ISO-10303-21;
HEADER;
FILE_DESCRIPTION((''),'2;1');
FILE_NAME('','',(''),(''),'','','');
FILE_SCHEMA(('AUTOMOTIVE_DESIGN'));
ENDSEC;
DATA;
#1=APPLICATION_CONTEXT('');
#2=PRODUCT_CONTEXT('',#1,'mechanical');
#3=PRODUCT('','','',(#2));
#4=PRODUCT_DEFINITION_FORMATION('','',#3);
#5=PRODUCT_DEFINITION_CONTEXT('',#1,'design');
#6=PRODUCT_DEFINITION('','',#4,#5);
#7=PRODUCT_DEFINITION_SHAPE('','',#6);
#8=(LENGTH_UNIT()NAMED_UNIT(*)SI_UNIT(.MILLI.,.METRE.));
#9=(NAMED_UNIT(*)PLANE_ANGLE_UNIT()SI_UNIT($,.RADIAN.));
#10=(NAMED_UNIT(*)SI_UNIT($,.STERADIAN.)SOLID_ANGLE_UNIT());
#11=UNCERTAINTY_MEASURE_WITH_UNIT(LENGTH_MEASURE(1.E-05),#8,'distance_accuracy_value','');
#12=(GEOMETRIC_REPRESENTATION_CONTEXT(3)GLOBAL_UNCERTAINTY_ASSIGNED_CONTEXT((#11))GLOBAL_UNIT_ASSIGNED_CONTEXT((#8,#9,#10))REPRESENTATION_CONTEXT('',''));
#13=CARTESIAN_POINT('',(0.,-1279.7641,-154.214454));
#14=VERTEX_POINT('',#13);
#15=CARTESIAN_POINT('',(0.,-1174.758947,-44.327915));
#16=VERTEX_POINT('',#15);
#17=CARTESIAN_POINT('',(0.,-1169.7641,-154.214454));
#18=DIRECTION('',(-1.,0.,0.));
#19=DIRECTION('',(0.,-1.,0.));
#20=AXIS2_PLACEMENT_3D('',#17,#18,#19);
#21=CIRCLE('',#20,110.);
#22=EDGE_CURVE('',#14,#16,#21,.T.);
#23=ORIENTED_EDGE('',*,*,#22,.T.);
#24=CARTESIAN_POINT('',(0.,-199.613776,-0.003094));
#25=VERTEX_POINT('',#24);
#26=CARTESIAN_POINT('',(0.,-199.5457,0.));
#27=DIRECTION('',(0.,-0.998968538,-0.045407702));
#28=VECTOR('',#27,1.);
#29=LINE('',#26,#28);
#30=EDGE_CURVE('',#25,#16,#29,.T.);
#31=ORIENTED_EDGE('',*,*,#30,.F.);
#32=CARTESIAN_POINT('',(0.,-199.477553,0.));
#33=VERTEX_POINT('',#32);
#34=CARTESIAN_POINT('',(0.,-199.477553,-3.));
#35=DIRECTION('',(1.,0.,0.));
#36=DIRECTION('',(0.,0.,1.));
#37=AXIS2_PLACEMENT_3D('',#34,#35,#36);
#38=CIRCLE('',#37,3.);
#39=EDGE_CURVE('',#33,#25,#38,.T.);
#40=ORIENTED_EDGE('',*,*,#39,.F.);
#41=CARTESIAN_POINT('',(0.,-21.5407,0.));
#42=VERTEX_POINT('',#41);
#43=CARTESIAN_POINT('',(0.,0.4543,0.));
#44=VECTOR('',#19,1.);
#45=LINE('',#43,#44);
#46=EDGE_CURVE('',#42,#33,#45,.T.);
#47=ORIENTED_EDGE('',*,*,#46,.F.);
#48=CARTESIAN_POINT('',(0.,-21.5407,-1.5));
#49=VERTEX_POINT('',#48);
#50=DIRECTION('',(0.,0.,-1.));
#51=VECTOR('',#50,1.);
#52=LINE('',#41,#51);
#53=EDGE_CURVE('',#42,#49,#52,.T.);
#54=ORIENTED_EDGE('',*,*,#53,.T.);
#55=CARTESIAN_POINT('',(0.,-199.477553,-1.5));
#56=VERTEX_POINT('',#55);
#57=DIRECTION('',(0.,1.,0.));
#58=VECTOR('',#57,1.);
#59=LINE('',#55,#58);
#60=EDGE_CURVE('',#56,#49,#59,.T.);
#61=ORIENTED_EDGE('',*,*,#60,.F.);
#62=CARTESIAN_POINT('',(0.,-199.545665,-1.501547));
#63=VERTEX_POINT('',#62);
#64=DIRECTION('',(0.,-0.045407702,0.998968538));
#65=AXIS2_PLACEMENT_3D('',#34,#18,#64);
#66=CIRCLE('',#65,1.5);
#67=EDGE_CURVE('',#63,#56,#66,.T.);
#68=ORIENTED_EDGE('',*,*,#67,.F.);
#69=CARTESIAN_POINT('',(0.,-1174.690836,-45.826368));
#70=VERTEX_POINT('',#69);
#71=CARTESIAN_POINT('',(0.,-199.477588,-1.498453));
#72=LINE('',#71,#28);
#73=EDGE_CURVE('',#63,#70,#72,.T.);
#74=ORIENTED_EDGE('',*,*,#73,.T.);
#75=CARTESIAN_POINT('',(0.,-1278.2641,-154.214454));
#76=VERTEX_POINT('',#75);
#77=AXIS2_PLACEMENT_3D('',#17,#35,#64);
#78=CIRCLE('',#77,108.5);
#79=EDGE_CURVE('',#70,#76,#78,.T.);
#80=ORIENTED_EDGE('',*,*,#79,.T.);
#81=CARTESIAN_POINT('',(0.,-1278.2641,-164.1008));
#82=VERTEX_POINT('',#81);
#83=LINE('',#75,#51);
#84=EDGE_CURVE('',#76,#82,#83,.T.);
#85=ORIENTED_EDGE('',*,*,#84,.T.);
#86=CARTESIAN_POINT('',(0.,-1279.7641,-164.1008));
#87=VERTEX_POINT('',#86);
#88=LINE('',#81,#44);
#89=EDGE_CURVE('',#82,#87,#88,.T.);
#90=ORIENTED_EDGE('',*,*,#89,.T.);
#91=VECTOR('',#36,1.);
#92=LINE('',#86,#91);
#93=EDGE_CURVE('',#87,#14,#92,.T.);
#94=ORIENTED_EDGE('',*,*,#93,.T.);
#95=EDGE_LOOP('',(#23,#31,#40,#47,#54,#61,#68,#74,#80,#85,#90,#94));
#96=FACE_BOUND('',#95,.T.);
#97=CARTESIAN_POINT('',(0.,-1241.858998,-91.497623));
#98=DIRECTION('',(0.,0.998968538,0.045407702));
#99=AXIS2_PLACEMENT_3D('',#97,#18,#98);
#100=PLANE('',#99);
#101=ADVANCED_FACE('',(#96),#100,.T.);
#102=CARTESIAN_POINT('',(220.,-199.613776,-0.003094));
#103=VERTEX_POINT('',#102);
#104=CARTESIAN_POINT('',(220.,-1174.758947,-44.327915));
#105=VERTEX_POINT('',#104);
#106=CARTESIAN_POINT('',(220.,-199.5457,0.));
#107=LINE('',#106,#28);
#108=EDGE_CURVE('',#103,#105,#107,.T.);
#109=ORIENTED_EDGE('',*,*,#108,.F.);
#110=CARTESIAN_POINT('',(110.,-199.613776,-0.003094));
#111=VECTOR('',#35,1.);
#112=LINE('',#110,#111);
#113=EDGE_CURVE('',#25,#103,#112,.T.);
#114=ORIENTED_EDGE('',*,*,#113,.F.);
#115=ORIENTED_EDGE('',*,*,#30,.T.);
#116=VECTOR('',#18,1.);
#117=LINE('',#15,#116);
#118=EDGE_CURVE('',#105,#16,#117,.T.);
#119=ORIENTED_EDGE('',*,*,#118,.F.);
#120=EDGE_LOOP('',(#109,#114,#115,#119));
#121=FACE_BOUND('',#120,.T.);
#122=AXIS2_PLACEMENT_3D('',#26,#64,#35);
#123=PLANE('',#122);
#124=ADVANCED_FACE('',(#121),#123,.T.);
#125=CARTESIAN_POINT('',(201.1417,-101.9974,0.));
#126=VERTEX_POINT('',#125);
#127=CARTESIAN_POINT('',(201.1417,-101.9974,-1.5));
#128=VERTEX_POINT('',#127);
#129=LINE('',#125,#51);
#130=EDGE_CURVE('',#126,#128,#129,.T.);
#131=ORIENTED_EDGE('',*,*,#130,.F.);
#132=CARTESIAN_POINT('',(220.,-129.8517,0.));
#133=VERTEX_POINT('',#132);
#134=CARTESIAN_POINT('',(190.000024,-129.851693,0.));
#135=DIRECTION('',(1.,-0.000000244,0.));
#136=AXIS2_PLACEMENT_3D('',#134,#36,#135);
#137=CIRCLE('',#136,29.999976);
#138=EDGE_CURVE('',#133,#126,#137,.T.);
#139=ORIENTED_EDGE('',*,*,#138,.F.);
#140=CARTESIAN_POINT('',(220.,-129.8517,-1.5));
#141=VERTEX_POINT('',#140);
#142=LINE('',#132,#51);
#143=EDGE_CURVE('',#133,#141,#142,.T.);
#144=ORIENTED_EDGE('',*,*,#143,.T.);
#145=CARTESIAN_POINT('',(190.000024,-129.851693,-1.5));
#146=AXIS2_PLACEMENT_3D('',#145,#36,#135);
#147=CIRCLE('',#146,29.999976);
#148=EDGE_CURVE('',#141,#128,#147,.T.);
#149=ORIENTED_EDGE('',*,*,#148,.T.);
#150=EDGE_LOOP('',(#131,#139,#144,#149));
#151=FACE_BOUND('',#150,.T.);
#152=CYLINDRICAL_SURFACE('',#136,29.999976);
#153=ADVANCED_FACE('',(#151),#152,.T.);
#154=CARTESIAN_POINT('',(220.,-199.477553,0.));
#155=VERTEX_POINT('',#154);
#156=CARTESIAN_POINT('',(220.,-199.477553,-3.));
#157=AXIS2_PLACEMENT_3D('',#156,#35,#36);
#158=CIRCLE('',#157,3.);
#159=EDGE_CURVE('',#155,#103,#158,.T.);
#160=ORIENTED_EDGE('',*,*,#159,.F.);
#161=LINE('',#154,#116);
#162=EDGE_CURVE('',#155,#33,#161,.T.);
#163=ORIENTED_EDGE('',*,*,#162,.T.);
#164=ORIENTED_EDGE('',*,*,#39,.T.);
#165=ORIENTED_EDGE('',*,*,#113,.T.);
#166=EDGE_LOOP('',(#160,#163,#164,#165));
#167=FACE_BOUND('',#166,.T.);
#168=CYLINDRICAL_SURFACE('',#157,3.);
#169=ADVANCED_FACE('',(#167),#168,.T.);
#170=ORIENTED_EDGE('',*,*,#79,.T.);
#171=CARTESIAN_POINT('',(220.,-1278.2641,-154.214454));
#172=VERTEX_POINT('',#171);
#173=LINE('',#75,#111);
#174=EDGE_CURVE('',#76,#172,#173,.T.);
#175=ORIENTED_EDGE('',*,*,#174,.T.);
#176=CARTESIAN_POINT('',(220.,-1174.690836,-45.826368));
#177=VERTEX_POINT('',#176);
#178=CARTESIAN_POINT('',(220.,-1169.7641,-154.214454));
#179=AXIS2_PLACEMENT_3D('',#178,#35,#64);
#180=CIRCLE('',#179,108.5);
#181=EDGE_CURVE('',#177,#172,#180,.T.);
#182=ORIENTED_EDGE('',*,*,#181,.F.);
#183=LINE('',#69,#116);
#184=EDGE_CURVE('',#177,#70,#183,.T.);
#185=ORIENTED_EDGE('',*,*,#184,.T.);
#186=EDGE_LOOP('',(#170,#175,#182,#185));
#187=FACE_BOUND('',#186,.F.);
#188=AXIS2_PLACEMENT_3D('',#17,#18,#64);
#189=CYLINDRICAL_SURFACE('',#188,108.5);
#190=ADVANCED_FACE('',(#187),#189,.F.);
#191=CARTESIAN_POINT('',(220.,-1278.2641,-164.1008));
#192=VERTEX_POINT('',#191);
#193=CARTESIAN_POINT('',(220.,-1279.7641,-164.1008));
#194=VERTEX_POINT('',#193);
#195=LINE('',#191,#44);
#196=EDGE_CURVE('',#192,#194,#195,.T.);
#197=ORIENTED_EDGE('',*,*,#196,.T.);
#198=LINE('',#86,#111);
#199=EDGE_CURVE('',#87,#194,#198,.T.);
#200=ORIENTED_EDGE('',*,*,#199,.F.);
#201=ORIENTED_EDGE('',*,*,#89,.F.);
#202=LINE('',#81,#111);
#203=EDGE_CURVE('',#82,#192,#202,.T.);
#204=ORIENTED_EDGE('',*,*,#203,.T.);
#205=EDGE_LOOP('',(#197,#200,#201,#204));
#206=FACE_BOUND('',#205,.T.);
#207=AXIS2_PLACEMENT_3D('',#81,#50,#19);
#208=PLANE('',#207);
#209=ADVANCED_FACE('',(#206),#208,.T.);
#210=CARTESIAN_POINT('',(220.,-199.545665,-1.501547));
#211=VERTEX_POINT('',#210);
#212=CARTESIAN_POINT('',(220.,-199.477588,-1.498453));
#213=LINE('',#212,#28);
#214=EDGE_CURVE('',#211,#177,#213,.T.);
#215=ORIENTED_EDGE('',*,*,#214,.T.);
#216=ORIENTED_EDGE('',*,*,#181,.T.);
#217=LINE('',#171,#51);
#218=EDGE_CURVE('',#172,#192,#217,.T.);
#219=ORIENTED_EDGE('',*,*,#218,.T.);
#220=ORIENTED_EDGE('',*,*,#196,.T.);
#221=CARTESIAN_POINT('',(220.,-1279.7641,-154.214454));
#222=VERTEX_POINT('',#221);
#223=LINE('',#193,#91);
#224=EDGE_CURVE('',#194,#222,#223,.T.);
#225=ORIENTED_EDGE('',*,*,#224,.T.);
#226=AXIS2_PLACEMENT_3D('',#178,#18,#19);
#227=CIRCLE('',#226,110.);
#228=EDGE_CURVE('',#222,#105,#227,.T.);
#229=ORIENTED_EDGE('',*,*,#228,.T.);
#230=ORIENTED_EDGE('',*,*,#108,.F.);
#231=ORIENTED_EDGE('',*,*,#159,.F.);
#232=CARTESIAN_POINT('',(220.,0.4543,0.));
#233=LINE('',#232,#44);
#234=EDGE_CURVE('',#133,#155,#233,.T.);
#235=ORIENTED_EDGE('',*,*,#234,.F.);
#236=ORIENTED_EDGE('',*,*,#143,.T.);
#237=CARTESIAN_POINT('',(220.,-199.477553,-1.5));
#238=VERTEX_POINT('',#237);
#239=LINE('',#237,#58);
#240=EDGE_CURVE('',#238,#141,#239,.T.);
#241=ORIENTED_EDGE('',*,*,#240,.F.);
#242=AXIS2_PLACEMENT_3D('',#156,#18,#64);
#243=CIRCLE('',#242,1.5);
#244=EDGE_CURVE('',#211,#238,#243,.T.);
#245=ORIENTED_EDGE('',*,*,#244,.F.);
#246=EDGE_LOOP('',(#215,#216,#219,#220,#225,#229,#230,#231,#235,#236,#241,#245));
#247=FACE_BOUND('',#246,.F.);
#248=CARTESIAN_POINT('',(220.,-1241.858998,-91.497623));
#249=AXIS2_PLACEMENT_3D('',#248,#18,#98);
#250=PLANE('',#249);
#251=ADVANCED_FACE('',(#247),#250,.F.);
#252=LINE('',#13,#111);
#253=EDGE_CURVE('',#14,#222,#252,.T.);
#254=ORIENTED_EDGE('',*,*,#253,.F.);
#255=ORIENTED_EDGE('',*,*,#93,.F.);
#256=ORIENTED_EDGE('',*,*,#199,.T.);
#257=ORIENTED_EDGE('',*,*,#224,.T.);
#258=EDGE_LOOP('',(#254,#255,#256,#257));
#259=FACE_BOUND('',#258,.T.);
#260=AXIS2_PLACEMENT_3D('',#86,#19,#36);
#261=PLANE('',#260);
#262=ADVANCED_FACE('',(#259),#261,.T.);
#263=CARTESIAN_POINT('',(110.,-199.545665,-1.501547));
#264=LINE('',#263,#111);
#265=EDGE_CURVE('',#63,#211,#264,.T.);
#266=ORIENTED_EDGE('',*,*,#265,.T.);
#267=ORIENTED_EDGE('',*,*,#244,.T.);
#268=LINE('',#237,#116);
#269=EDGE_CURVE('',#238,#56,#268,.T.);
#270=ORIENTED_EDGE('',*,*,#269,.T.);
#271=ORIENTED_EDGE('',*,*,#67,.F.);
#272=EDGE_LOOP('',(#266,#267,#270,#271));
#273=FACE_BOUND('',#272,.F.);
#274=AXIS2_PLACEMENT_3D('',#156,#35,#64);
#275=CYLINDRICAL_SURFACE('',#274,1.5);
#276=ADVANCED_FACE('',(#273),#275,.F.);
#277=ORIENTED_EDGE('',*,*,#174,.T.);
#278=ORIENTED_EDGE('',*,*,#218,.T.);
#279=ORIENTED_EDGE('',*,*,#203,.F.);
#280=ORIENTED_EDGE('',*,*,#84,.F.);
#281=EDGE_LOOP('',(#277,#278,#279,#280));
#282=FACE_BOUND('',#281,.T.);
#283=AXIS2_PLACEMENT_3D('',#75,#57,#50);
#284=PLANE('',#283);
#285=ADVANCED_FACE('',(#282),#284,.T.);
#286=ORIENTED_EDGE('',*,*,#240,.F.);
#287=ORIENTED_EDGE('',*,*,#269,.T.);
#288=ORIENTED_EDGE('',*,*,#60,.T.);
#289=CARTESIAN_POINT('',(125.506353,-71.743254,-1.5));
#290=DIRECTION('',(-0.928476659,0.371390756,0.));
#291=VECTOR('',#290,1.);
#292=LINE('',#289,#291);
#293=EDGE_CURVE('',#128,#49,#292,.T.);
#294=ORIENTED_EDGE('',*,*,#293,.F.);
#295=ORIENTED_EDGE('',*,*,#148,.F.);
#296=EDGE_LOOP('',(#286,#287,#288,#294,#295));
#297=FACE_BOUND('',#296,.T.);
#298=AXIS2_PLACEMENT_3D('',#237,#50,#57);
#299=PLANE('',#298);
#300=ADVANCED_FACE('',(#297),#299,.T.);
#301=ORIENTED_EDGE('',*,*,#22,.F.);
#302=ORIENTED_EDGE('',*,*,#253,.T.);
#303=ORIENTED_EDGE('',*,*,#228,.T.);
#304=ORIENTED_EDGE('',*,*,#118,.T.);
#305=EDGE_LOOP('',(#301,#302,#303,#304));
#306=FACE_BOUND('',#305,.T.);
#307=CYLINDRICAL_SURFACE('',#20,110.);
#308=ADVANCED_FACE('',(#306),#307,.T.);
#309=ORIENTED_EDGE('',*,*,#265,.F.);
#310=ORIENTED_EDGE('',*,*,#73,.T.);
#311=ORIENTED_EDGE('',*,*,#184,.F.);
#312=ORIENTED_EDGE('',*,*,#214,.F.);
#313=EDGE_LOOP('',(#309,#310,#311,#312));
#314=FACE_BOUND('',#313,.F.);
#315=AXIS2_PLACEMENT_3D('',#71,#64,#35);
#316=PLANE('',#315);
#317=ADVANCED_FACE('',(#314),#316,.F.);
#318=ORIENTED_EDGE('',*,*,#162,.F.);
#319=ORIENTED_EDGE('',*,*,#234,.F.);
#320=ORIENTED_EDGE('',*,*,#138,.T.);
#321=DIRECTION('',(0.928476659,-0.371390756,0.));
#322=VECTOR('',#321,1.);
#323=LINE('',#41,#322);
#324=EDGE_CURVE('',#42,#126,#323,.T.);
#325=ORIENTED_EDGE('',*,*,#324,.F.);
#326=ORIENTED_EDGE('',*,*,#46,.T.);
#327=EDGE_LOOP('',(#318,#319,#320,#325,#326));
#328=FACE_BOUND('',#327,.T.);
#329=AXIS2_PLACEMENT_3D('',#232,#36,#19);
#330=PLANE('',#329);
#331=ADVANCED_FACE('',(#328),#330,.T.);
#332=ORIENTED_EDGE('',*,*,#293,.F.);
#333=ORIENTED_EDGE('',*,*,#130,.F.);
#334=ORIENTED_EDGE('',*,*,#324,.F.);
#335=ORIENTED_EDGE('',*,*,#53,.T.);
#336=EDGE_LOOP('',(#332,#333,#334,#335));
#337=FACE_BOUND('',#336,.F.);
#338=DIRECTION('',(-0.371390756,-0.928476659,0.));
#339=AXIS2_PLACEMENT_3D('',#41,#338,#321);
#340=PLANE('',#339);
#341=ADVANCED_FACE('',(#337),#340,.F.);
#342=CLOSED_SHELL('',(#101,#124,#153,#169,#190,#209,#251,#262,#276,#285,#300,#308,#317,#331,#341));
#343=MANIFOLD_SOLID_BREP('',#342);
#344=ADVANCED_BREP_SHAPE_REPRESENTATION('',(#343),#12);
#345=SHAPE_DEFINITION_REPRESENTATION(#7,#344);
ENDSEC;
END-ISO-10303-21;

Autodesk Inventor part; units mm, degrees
ref_plane "Work Plane6" through (0, -199.5457, 0) normal (0, -0.0454077, 0.9989685) x (1, 0, 0)
sketch "Sketch4" plane through (0, -199.5457, 0) normal (0, -0.0454077, 0.9989685) x (1, 0, 0)
  line L0 (220, 0) -> (220, -976.9106)
  line L1 (0, 0) -> (220, 0)
  line L2 (0, 0) -> (0, -976.9106)
  line L3 (0, -976.9106) -> (220, -976.9106)
  point P0 (0, 199.3399)
extrude "Plate4" add sketch "Sketch4" against normal blind 1.5
ref_plane "Work Plane7" through (0, 0, 0) normal (0, 0, 1) x (1, 0, 0)
sketch "Sketch5" plane through (0, 0, 0) normal (0, 0, -1) x (1, 0, 0)
  line L0 (0, -166.5116) -> (220, -166.5116)
  line L1 (220, -166.5116) -> (220, 0.4543)
  line L2 (220, 0.4543) -> (0, 0.4543)
  line L3 (0, 0.4543) -> (0, -166.5116)
edge flange "Flange3" height 200 angle 90 thickness 1.5 bend radius 1.5 thickness toward (0, 0, -1) relief tear relief width 1.5 relief depth 0.75 edges at (110, -199.4776, -1.4985) wall of the first edge with corners at (0, -166.5116, 0) (220, -166.5116, 0) (220, 0.4543, 0) (0, 0.4543, 0)
bend "Bend3"
corner "Corner3"
sketch "Sketch6" plane through (0, 0.4543, 0) normal (0, 0, 1) x (1, 0, 0)
  arc A0 (220, -130.306) -> (201.1417, -102.4517) centre (190, -130.306) ccw projected
  line L0 (0, -21.995) -> (201.1417, -102.4517) projected
  line L1 (0, -21.995) -> (0, -200) projected
  line L2 (0, -200) -> (220, -200) projected
  line L3 (220, -130.306) -> (220, -200) projected
  line L4 (0, -199.9319) -> (220, -199.9319) projected
  line L5 (220, 0) -> (220, -199.9319) projected
  line L6 (0, 0) -> (220, 0) projected
  line L7 (0, -199.9319) -> (0, 0) projected
  point P0 (0, -0.4543)
  point P1 (220, -130.306)
extrude "Extrusion1" cut sketch "Sketch6" against normal through all contours A0 L0 L7 L6 L5
ref_plane "Work Plane9" through (125, -1279.7641, -134.7549) normal (0, -1, 0) x (-1, 0, 0)
sketch "Sketch8" plane through (125, -1279.7641, -134.7549) normal (0, 1, 0) x (-1, 0, 0)
  line L0 (-95, -84.1525) -> (125, -84.1525)
  line L1 (125, -84.1525) -> (125, 29.3459)
  line L2 (125, 29.3459) -> (-95, 29.3459)
  line L3 (-95, 29.3459) -> (-95, -84.1525)
edge flange "Flange5" height 115 angle 90 thickness 1.5 bend radius 108.5 thickness toward (0, 1, 0) relief tear relief width 1.5 relief depth 0.75 edges at (110, -1175.3806, -45.8577) wall of the first edge with corners at (220, -1279.7641, -50.6024) (0, -1279.7641, -50.6024) (0, -1279.7641, -164.1008) (220, -1279.7641, -164.1008)
bend "Bend5"
corner "Corner5"
ref_plane "Work Plane8" through (125, -1278.2641, -134.7549) normal (0, -1, 0) x (-1, 0, 0)
sketch "Sketch9" plane through (220, -1279.7641, -164.1008) normal (1, 0, 0) x (0, 0, -1)
  line L0 (-9.8864, 1.5) -> (-9.8864, 0) projected
  arc A0 (-118.2745, 105.0733) -> (-9.8864, 1.5) centre (-9.8864, 110) ccw projected
  line L1 (-119.773, 105.0052) -> (-118.2745, 105.0733) projected
  arc A1 (-119.773, 105.0052) -> (-9.8864, 0) centre (-9.8864, 110) ccw projected
  line L2 (-9.8864, 1.5) -> (-9.8864, 0) projected
  line L3 (-9.8864, 0) -> (0, 0) projected
  line L4 (0, 1.5) -> (0, 0) projected
  line L5 (-9.8864, 1.5) -> (0, 1.5) projected
  line L6 (-29.3211, 1.7305) -> (-29.0561, 3.2069)
  point P0 (-164.1008, 1279.7641)
sketch3d "3D Sketch1"
sketch "Sketch1" plane through (0, 0, 0) normal (0, 0, 1) x (1, 0, 0)
  line L0 (1250.1265, -201.1417) -> (1330.5832, 0) projected
  line L1 (0, 0) -> (1330.5832, 0) projected
  line L2 (0, -220) -> (0, 0) projected
  line L3 (1222.2722, -220) -> (0, -220) projected
  arc A0 (1222.2722, -220) -> (1250.1265, -201.1417) centre (1222.2722, -190) ccw projected
equation "\"d22\" = Thickness"
equation "\"d23\" = BendReliefWidth"
equation "\"d24\" = BendReliefDepth"
equation "\"d25\" = MinimumRemnant"
equation "\"d26\" = TransitionRadius"
equation "\"d29\" = BendRadius"
equation "\"d30\" = CornerReliefSize"
equation "\"d31\" = GapSize"
equation "\"d32\" = JacobiRadiusSize"
equation "\"d46\" = BendReliefWidth"
equation "\"d47\" = BendReliefDepth"
equation "\"d48\" = MinimumRemnant"
equation "\"d49\" = TransitionRadius"
equation "\"d53\" = CornerReliefSize"
equation "\"d54\" = GapSize"
equation "\"d55\" = JacobiRadiusSize"
equation "\"BendRadius\" = Thickness"
equation "\"BendReliefWidth\" = Thickness"
equation "\"BendReliefDepth\" = 0.5 * Thickness"
equation "\"CornerReliefSize\" = 4 * Thickness"
equation "\"MinimumRemnant\" = 2 * Thickness"
equation "\"TransitionRadius\" = BendRadius"
equation "\"JacobiRadiusSize\" = BendRadius"
equation "\"GapSize\" = Thickness"
equation "\"Thickness\" = 1.5"
properties part number "CARCASA_ALUM_3"
